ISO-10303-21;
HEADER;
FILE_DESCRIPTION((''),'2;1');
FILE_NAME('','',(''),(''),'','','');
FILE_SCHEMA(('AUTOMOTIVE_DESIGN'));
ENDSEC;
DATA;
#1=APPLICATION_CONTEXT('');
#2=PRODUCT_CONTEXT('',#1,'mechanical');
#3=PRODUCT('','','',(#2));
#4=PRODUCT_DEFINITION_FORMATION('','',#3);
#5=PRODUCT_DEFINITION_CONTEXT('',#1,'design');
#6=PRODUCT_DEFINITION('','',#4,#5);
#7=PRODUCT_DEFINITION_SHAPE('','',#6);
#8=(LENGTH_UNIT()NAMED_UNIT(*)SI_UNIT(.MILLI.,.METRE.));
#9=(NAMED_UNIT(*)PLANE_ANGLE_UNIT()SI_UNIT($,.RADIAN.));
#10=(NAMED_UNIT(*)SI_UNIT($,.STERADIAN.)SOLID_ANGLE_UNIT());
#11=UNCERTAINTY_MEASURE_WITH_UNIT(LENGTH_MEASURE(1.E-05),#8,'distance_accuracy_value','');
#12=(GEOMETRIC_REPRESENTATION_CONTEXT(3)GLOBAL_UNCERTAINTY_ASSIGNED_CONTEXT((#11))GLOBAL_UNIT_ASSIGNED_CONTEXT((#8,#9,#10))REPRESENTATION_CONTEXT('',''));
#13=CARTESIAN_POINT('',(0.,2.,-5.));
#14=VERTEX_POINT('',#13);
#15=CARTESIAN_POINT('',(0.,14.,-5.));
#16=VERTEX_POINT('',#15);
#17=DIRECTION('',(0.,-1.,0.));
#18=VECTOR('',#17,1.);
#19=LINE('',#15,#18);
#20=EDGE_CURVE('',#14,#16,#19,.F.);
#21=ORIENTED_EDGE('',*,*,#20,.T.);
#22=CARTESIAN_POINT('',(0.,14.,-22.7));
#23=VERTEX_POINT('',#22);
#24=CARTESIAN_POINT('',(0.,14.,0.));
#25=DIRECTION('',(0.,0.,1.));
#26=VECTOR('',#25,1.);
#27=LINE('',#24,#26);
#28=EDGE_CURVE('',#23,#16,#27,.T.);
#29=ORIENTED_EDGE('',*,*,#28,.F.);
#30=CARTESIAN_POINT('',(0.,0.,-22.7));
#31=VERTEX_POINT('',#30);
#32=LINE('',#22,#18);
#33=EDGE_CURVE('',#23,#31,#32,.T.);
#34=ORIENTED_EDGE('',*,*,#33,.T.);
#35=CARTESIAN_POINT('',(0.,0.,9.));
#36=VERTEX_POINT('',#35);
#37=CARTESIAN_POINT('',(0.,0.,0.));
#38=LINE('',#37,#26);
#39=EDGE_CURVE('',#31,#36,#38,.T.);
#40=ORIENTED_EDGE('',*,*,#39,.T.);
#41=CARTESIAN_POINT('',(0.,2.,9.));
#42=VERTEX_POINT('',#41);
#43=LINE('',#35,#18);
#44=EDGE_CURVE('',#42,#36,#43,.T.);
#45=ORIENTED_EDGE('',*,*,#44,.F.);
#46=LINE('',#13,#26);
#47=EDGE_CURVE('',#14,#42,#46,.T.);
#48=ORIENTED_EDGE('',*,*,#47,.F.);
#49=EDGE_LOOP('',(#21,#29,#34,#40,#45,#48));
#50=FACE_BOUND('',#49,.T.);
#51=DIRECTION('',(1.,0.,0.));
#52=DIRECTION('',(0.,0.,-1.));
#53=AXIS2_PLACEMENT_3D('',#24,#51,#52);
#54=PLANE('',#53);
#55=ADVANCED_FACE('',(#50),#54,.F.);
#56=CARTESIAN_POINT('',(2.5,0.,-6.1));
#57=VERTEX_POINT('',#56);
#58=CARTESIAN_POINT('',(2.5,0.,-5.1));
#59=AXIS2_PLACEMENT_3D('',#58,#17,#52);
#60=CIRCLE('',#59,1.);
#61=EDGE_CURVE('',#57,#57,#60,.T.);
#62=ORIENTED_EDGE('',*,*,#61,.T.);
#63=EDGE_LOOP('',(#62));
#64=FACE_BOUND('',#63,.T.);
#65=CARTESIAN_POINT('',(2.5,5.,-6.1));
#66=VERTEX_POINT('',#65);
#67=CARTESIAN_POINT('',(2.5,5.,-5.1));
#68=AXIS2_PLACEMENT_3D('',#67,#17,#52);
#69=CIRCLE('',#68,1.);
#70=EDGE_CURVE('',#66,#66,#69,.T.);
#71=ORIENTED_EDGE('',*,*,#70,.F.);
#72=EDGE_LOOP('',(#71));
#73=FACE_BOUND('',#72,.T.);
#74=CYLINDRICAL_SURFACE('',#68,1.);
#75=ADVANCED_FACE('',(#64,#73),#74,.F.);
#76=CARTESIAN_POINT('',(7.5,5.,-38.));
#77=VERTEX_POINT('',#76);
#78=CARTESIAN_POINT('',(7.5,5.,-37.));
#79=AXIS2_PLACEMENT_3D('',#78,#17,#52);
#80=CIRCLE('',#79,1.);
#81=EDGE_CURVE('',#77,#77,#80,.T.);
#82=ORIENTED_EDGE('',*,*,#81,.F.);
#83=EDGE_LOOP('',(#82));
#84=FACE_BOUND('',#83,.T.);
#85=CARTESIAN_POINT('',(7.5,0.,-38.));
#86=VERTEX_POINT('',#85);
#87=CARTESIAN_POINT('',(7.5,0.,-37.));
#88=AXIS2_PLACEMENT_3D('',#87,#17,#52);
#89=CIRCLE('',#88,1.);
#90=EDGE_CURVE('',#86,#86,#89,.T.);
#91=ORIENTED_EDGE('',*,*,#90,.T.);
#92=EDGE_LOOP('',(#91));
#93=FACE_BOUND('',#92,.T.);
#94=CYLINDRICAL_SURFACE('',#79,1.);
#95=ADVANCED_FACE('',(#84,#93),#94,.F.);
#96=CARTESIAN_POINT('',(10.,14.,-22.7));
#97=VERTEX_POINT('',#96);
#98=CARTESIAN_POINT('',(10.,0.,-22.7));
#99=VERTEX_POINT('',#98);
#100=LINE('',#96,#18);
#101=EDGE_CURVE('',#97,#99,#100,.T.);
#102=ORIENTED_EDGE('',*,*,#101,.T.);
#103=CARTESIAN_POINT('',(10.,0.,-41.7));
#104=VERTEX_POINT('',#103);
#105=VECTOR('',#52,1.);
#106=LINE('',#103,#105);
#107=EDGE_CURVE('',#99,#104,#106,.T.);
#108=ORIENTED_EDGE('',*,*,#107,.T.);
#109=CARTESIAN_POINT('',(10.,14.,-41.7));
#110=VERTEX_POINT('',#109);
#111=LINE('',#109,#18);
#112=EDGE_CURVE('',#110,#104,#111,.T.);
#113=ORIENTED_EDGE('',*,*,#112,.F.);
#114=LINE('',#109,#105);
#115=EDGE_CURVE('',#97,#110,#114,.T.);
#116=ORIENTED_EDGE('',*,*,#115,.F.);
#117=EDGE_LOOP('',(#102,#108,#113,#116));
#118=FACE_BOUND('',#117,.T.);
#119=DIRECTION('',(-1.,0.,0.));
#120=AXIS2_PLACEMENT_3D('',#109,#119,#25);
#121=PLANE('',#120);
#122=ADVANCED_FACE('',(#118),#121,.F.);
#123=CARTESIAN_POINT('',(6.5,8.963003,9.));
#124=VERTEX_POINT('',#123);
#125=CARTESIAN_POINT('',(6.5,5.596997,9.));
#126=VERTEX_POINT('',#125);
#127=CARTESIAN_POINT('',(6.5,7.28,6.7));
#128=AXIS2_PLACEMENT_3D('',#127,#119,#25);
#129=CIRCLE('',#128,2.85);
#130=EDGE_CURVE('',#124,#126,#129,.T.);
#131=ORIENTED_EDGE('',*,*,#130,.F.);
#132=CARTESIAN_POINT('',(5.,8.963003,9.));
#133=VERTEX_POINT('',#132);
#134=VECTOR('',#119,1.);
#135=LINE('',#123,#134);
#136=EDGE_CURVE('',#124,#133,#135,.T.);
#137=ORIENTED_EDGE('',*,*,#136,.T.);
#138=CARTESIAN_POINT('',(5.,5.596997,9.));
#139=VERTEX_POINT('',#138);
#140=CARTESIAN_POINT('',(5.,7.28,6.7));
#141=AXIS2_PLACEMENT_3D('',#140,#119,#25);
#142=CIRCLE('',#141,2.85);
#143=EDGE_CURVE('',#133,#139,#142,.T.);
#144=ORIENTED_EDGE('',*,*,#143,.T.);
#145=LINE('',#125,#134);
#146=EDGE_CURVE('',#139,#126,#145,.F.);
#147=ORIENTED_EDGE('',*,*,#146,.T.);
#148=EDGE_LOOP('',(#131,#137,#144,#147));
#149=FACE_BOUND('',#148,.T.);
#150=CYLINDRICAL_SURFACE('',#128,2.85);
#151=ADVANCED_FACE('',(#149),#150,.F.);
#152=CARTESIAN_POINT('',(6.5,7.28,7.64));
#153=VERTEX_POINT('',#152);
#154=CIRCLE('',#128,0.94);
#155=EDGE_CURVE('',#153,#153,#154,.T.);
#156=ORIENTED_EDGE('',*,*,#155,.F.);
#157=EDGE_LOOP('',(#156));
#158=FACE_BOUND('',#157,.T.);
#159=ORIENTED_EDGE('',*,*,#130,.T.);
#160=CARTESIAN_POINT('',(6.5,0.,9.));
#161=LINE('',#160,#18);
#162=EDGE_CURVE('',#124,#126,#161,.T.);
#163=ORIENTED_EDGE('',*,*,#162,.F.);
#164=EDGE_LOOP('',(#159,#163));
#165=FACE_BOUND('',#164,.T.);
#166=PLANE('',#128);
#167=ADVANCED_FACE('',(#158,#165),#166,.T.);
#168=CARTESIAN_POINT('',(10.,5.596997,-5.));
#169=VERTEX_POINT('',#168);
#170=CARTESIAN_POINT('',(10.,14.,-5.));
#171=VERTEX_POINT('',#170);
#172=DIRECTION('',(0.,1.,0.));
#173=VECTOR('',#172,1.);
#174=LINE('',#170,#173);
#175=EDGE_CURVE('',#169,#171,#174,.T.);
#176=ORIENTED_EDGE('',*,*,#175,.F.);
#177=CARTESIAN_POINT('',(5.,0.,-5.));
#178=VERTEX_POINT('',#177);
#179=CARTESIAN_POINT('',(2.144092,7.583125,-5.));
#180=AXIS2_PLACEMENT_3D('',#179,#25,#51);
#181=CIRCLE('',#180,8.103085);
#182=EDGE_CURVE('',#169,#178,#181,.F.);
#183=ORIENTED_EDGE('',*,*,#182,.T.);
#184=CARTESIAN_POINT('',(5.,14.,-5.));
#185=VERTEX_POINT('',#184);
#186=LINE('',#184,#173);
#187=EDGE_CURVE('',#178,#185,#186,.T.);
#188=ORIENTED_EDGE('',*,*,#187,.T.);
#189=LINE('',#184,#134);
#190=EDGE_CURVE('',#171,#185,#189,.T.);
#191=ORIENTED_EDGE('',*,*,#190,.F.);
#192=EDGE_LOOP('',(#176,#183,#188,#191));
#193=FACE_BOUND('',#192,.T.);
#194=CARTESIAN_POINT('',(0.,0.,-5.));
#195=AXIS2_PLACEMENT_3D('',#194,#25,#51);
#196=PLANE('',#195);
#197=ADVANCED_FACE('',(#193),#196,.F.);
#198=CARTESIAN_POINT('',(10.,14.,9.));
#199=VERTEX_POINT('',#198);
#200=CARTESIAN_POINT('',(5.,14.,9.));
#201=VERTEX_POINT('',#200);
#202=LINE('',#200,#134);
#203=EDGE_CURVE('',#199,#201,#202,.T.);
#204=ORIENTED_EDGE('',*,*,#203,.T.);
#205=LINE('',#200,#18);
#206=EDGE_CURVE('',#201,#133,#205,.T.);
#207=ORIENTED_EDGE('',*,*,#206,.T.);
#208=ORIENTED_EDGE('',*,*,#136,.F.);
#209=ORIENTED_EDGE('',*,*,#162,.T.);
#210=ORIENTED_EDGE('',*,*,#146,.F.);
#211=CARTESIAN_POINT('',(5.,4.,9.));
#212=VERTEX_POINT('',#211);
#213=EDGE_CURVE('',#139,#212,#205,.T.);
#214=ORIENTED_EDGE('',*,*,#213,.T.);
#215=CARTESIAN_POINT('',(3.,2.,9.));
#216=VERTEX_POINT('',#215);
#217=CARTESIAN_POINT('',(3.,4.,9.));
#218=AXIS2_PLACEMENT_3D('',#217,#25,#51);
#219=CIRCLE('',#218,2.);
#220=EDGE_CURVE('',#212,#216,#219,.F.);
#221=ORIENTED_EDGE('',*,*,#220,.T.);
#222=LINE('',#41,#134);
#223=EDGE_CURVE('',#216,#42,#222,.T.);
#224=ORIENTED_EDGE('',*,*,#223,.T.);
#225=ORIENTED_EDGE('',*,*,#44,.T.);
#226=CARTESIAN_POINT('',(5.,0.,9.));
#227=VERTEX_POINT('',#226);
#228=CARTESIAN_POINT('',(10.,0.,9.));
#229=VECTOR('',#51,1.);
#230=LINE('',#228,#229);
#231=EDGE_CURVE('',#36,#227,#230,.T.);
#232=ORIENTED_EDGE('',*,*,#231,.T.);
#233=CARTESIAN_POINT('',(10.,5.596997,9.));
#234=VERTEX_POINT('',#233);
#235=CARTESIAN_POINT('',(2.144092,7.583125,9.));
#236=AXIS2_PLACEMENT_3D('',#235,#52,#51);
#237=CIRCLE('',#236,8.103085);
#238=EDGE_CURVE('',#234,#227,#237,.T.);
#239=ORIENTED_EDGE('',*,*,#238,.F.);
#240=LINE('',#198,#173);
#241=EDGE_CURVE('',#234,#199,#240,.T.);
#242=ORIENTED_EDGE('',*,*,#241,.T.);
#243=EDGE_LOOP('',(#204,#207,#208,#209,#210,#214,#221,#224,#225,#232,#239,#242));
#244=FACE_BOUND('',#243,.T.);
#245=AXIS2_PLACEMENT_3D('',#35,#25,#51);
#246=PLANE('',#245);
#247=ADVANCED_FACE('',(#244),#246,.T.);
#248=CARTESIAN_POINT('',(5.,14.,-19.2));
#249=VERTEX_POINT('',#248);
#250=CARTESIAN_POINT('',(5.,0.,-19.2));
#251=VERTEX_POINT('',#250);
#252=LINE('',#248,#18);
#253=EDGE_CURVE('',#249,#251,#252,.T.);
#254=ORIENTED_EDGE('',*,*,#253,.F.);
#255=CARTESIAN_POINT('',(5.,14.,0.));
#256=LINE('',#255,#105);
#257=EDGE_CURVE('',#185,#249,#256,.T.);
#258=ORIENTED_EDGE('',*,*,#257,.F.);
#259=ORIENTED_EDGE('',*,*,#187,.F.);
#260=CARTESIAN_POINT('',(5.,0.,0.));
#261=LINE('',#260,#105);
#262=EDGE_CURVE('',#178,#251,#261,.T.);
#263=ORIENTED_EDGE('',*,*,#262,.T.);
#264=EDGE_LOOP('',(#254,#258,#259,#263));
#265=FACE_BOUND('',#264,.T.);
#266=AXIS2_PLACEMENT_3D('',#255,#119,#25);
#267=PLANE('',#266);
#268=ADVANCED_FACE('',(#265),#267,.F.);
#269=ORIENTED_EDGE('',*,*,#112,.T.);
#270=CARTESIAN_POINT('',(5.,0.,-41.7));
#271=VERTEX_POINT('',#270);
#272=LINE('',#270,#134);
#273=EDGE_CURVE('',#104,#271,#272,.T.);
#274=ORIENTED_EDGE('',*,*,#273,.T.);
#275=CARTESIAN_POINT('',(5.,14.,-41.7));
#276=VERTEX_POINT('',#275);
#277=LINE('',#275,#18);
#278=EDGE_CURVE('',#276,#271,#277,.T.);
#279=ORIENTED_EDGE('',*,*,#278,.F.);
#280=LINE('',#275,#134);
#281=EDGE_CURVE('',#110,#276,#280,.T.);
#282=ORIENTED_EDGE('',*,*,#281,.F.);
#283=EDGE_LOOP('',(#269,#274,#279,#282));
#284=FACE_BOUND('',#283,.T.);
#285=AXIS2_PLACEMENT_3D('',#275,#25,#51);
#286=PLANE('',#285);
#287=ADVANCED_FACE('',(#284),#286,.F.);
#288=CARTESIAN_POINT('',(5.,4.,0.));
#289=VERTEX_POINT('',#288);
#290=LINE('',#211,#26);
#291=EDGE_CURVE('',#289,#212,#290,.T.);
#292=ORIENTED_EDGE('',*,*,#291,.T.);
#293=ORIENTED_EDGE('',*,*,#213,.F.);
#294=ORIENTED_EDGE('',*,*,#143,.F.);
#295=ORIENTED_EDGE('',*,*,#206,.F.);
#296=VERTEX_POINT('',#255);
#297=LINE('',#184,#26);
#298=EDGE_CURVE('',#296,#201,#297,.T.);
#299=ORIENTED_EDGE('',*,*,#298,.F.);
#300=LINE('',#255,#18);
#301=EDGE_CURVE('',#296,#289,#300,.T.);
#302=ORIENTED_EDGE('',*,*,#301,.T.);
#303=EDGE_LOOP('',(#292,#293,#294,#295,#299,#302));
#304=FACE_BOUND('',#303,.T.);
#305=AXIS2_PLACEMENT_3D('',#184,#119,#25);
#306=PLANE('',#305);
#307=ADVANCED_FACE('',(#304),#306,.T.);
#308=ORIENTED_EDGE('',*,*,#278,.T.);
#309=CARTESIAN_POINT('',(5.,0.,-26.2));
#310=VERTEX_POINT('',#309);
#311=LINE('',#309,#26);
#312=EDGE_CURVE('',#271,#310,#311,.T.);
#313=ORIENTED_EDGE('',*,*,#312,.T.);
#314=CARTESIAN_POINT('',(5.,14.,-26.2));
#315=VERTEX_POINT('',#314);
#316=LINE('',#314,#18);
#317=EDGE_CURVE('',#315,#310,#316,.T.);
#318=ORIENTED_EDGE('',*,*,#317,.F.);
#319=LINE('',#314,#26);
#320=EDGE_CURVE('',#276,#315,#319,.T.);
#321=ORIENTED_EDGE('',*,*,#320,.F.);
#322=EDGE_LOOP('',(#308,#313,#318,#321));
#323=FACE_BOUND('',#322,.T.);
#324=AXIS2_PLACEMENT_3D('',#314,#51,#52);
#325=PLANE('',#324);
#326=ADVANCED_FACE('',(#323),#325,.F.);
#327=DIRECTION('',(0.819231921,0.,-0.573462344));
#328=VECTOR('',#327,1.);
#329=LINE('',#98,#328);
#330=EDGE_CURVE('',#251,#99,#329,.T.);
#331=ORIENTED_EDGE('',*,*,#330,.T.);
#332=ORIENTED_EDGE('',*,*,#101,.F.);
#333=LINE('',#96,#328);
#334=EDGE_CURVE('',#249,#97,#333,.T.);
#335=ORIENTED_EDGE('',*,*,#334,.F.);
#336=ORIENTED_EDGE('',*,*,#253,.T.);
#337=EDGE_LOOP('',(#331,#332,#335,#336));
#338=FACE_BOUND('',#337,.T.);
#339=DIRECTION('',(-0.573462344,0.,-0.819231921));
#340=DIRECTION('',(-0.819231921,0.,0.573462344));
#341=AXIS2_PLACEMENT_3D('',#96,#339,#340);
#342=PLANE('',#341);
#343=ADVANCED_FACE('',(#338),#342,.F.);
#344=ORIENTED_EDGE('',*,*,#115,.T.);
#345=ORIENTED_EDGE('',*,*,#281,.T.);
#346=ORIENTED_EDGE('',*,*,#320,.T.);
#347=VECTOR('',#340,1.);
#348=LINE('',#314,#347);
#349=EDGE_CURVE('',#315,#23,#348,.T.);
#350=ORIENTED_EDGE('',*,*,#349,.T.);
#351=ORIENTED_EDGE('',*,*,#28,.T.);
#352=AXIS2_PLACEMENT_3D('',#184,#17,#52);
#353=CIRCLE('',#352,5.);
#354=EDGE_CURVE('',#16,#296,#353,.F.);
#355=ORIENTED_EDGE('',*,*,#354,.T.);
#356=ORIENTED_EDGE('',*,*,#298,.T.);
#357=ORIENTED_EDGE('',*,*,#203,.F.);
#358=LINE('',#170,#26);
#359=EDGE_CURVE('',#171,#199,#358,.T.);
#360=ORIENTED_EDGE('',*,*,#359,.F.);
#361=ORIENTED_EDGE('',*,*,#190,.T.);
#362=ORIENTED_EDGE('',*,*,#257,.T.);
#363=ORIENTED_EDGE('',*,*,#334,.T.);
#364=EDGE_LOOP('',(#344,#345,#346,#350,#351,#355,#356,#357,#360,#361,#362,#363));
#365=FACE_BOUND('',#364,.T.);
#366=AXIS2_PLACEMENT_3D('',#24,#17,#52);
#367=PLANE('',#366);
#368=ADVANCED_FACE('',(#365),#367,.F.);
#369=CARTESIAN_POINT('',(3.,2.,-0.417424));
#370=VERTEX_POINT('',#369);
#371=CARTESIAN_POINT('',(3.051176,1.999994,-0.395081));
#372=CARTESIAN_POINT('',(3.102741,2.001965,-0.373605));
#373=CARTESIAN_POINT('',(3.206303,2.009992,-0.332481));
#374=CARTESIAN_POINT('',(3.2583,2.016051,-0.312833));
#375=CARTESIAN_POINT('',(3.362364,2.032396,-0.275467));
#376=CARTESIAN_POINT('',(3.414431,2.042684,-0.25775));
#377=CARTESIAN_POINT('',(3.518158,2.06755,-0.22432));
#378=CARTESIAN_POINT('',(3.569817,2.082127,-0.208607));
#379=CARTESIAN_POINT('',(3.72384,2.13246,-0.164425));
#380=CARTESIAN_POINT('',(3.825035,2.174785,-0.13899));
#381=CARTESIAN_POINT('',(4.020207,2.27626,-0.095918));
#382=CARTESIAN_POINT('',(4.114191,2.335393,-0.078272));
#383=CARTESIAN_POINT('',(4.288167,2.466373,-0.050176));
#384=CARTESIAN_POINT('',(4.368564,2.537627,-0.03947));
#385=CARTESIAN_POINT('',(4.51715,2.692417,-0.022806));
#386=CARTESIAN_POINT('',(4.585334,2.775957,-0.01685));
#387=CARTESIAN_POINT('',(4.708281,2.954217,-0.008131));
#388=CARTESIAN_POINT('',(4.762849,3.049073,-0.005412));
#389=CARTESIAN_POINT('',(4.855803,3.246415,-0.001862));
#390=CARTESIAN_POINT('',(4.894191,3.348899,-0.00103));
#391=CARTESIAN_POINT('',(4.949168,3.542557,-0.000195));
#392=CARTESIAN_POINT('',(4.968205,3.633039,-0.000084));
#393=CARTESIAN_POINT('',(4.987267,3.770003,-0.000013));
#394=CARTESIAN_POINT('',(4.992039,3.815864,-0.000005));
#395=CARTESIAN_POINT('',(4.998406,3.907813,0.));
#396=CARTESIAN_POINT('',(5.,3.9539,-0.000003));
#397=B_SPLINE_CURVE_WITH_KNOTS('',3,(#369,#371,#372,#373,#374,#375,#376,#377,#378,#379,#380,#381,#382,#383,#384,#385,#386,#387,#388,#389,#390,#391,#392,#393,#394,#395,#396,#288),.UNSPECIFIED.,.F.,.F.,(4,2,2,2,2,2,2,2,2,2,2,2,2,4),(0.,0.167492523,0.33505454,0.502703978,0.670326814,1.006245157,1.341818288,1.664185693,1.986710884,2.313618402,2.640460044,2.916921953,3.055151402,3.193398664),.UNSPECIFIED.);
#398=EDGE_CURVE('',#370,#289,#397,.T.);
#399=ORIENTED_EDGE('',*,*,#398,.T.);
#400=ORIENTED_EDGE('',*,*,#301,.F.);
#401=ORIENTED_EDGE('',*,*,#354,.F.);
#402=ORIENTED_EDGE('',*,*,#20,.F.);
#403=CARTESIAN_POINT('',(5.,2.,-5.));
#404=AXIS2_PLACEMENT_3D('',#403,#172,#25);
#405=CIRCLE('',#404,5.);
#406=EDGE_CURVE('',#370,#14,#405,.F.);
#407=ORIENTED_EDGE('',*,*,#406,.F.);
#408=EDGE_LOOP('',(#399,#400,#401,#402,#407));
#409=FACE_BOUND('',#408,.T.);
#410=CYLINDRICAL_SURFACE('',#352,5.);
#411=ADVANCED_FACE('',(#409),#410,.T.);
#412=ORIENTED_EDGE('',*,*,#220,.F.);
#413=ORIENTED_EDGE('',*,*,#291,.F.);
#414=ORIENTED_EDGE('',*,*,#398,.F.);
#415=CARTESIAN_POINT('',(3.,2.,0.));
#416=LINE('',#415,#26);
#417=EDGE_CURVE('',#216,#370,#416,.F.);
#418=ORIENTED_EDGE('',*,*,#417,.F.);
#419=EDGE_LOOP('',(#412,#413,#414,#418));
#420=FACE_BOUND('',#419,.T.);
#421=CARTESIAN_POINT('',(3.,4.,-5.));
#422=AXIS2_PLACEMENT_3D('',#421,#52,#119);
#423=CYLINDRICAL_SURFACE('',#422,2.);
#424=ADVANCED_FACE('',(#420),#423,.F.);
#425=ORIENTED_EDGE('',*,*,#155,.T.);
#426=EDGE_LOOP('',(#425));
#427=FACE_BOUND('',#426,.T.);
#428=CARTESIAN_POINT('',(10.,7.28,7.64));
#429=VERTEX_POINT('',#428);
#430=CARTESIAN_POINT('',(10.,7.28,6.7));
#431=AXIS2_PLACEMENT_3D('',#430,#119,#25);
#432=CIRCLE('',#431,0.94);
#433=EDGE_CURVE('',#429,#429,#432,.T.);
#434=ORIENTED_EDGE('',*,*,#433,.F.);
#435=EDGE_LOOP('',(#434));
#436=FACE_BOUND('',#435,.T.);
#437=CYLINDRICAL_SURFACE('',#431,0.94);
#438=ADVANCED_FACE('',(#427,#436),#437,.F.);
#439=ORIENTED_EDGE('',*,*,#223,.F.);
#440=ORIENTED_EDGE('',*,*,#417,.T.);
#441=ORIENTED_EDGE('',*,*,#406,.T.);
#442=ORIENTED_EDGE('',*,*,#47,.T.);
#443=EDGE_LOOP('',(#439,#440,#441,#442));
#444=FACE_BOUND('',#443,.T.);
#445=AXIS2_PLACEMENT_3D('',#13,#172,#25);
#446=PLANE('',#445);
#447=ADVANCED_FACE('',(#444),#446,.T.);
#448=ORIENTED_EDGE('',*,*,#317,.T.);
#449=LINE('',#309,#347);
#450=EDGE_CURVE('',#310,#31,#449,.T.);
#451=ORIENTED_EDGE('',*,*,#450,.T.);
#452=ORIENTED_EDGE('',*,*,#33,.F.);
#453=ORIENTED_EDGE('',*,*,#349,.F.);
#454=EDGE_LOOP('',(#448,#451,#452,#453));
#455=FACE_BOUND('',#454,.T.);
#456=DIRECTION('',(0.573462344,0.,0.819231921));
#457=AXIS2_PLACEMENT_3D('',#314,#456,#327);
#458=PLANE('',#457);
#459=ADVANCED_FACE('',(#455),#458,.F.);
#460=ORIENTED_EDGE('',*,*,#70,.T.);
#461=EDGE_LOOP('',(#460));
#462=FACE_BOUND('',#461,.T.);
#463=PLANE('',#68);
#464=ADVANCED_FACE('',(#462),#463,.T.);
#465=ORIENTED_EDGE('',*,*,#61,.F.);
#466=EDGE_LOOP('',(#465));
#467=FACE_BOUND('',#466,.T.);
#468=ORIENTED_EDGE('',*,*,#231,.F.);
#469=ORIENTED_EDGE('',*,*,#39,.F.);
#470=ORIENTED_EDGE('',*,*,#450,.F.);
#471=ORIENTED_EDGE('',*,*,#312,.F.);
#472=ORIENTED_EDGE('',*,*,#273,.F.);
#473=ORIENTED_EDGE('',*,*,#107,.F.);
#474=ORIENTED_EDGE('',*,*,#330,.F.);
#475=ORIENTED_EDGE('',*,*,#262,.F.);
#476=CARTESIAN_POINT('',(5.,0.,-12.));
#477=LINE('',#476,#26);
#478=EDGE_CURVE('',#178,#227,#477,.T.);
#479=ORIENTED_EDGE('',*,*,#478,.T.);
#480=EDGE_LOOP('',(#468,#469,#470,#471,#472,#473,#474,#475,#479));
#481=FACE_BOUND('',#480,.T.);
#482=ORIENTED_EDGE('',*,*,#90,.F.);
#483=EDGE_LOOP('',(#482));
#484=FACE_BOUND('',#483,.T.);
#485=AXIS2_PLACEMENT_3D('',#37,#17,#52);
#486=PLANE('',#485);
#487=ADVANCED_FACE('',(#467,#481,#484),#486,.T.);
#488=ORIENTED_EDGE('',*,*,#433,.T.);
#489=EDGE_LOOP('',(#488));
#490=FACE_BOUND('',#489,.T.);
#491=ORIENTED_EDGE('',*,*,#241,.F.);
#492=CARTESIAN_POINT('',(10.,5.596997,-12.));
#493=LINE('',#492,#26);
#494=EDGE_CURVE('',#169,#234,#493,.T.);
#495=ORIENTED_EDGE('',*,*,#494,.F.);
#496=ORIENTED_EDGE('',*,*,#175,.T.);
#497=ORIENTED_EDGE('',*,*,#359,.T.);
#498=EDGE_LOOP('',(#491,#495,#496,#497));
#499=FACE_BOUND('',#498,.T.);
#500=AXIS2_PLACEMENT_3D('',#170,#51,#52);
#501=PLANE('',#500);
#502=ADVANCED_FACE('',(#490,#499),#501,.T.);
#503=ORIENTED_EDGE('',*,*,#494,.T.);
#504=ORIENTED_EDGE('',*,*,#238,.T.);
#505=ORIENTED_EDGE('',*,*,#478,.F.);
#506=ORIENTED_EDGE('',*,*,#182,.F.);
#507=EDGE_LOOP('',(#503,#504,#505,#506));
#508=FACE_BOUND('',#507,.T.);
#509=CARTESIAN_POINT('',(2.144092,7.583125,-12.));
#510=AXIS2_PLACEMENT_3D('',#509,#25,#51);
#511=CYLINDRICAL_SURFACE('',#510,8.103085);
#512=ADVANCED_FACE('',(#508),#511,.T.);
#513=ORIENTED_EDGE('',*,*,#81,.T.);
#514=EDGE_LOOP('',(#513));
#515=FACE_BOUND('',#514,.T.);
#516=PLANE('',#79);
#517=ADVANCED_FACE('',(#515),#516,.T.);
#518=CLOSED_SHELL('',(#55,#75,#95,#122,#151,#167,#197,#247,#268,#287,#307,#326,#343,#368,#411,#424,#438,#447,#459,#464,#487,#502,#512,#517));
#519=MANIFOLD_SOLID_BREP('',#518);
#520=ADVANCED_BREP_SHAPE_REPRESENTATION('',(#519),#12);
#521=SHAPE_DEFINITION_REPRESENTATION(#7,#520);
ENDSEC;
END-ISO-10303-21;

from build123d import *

# Parameters (mm, degrees)
SALIENTE_EXTRUIR1_DEPTH      = 14
SALIENTE_EXTRUIR3_DEPTH      = 9
SALIENTE_EXTRUIR3_DEPTH_BACK = 5
CROQUIS5_R                   = 2.85
CORTAR_EXTRUIR3_DEPTH        = 6.5
CORTAR_EXTRUIR4_DEPTH        = 21
CROQUIS7_R                   = 1
CORTAR_EXTRUIR5_DEPTH        = 5
CROQUIS8_R                   = 0.94
CORTAR_EXTRUIR6_DEPTH        = 45.465042449
REDONDEO2_R                  = 5
REDONDEO3_R                  = 2


with BuildPart() as part:
    # Croquis1 → Saliente-Extruir1 (new body)
    with BuildSketch(Plane(origin=(0, 0, 0), x_dir=(1, 0, 0), z_dir=(0, 1, 0))):
        Polygon((0, 0), (5, 0), (5, 19.2), (10, 22.7), (10, 41.7), (5, 41.7), (5, 26.2), (0, 22.7), align=None)
    extrude(amount=SALIENTE_EXTRUIR1_DEPTH)

    # Croquis2 → Saliente-Extruir3 (add, two sides: drawn at the far end of the back side and taken through both)
    with BuildSketch(Plane.XY.offset(-SALIENTE_EXTRUIR3_DEPTH_BACK)):
        Polygon((0, 0), (0, 2), (5, 2), (5, 14), (10, 14), (10, 0), align=None)
    extrude(amount=SALIENTE_EXTRUIR3_DEPTH + SALIENTE_EXTRUIR3_DEPTH_BACK)

    # Croquis5 → Cortar-Extruir3 (cut)
    with BuildSketch(Plane.ZY):
        with Locations((6.7, 7.28)):
            Circle(CROQUIS5_R)
    extrude(amount=-CORTAR_EXTRUIR3_DEPTH, mode=Mode.SUBTRACT)

    # Croquis6 → Cortar-Extruir4 (cut)
    with BuildSketch(Plane.XY.offset(9)):
        with BuildLine():
            Line((5, 0), (10, 0))
            Line((10, 0), (10, 5.596996732))
            ThreePointArc((10, 5.596996732), (8.187050213, 2.184731514), (5, 0))
        make_face()
    extrude(amount=-CORTAR_EXTRUIR4_DEPTH, mode=Mode.SUBTRACT)

    # Croquis7 → Cortar-Extruir5 (cut)
    with BuildSketch(Plane.XZ):
        with Locations(Location((7.5, -37, 0), (0, 0, 270))):
            Circle(CROQUIS7_R)
        with Locations(Location((2.5, -5.1, 0), (0, 0, 270))):
            Circle(CROQUIS7_R)
    extrude(amount=-CORTAR_EXTRUIR5_DEPTH, mode=Mode.SUBTRACT)

    # Croquis8 → Cortar-Extruir6 (cut, through all)
    with BuildSketch(Plane.ZY.offset(-6.5)):
        with Locations((6.7, 7.28)):
            Circle(CROQUIS8_R)
    extrude(amount=-CORTAR_EXTRUIR6_DEPTH, mode=Mode.SUBTRACT)

    # Redondeo2
    redondeo2_edges = [part.edges().sort_by_distance(p)[0] for p in [
        (0, 8, 0),
    ]]
    fillet(redondeo2_edges, radius=REDONDEO2_R - 0.0001)  # a hair under: the kernel refuses the full size

    # Redondeo3
    redondeo3_edges = [part.edges().sort_by_distance(p)[0] for p in [
        (5, 2, 4.5),
    ]]
    fillet(redondeo3_edges, radius=REDONDEO3_R)


solid = part.part
